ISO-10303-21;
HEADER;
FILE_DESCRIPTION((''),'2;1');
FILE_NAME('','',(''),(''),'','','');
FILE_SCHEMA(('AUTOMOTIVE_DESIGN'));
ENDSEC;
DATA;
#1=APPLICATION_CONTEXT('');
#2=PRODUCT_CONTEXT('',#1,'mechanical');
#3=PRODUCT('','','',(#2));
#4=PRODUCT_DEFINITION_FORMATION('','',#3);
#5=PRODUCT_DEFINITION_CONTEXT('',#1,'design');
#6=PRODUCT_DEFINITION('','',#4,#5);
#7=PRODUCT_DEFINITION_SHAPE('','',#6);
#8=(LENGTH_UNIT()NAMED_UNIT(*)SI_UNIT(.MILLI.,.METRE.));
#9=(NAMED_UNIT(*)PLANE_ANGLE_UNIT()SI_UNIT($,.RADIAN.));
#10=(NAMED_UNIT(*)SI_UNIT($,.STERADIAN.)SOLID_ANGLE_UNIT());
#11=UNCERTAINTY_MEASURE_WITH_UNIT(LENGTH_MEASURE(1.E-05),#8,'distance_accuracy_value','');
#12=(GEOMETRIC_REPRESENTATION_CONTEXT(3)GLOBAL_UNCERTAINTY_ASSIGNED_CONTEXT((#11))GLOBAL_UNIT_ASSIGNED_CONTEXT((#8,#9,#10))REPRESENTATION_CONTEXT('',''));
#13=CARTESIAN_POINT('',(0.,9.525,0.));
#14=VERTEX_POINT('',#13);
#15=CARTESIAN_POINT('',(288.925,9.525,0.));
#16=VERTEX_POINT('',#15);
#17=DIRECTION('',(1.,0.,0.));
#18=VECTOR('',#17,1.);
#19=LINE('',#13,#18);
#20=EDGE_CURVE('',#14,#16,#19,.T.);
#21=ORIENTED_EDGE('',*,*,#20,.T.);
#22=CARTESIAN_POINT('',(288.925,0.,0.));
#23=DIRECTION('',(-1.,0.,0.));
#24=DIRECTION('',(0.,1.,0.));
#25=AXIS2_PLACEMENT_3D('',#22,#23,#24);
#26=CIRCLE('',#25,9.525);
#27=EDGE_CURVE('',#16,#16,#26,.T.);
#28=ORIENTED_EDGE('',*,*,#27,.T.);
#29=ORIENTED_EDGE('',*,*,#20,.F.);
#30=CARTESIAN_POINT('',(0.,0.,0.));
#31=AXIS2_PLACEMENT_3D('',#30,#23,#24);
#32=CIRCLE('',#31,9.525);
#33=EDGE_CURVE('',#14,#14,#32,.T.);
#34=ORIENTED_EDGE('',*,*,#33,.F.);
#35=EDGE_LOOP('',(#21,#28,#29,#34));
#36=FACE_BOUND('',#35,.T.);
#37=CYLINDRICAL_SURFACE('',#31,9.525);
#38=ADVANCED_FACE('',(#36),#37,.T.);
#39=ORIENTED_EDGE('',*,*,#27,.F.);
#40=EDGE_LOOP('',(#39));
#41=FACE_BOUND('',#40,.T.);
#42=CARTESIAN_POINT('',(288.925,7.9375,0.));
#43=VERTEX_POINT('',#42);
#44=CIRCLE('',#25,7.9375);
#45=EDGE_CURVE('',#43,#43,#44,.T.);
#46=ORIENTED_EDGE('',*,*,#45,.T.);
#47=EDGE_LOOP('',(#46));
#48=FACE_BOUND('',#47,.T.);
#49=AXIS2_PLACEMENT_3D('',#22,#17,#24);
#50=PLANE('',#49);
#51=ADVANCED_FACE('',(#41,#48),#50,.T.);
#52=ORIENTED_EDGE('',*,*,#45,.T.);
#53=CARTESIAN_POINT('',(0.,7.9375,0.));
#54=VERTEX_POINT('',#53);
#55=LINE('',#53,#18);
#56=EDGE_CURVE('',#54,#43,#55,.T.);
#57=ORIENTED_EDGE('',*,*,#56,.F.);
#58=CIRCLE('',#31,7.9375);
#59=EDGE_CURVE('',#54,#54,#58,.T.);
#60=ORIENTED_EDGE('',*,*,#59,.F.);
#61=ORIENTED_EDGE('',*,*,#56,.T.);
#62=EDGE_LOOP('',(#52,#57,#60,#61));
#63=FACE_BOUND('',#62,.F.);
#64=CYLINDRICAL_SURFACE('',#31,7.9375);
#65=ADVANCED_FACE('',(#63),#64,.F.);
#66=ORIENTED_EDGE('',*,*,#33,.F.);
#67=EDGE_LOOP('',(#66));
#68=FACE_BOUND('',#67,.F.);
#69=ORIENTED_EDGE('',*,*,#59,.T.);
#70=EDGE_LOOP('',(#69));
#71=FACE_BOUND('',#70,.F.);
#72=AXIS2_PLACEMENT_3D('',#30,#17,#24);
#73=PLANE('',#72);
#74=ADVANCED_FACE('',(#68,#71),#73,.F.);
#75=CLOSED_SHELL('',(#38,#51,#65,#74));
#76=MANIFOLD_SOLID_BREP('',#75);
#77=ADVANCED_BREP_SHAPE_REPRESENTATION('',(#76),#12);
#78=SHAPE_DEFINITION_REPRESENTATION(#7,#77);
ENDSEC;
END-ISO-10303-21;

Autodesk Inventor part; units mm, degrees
ref_plane "YZ Plane" through (0, 0, 0) normal (1, 0, 0) x (0, 1, 0)
ref_plane "XZ Plane" through (0, 0, 0) normal (0, 1, 0) x (-1, 0, 0)
ref_plane "XY Plane" through (0, 0, 0) normal (0, 0, 1) x (1, 0, 0)
sketch "Sketch1" plane through (0, 0, 0) normal (1, 0, 0) x (0, 1, 0)
  circle A0 centre (0, 0) radius 9.525
  circle A1 centre (0, 0) radius 7.9375
  dimension "d0" = 19.05
  dimension "d1" = 15.875
extrude "Extrusion1" add sketch "Sketch1" along normal blind 25.4
thicken "Thicken1" operation add thickness 263.525 both sides no extend neighbours yes toward (1, 0, 0) faces at (25.4, 8.8267, -1.393)
properties part number "snoRoundRail"
